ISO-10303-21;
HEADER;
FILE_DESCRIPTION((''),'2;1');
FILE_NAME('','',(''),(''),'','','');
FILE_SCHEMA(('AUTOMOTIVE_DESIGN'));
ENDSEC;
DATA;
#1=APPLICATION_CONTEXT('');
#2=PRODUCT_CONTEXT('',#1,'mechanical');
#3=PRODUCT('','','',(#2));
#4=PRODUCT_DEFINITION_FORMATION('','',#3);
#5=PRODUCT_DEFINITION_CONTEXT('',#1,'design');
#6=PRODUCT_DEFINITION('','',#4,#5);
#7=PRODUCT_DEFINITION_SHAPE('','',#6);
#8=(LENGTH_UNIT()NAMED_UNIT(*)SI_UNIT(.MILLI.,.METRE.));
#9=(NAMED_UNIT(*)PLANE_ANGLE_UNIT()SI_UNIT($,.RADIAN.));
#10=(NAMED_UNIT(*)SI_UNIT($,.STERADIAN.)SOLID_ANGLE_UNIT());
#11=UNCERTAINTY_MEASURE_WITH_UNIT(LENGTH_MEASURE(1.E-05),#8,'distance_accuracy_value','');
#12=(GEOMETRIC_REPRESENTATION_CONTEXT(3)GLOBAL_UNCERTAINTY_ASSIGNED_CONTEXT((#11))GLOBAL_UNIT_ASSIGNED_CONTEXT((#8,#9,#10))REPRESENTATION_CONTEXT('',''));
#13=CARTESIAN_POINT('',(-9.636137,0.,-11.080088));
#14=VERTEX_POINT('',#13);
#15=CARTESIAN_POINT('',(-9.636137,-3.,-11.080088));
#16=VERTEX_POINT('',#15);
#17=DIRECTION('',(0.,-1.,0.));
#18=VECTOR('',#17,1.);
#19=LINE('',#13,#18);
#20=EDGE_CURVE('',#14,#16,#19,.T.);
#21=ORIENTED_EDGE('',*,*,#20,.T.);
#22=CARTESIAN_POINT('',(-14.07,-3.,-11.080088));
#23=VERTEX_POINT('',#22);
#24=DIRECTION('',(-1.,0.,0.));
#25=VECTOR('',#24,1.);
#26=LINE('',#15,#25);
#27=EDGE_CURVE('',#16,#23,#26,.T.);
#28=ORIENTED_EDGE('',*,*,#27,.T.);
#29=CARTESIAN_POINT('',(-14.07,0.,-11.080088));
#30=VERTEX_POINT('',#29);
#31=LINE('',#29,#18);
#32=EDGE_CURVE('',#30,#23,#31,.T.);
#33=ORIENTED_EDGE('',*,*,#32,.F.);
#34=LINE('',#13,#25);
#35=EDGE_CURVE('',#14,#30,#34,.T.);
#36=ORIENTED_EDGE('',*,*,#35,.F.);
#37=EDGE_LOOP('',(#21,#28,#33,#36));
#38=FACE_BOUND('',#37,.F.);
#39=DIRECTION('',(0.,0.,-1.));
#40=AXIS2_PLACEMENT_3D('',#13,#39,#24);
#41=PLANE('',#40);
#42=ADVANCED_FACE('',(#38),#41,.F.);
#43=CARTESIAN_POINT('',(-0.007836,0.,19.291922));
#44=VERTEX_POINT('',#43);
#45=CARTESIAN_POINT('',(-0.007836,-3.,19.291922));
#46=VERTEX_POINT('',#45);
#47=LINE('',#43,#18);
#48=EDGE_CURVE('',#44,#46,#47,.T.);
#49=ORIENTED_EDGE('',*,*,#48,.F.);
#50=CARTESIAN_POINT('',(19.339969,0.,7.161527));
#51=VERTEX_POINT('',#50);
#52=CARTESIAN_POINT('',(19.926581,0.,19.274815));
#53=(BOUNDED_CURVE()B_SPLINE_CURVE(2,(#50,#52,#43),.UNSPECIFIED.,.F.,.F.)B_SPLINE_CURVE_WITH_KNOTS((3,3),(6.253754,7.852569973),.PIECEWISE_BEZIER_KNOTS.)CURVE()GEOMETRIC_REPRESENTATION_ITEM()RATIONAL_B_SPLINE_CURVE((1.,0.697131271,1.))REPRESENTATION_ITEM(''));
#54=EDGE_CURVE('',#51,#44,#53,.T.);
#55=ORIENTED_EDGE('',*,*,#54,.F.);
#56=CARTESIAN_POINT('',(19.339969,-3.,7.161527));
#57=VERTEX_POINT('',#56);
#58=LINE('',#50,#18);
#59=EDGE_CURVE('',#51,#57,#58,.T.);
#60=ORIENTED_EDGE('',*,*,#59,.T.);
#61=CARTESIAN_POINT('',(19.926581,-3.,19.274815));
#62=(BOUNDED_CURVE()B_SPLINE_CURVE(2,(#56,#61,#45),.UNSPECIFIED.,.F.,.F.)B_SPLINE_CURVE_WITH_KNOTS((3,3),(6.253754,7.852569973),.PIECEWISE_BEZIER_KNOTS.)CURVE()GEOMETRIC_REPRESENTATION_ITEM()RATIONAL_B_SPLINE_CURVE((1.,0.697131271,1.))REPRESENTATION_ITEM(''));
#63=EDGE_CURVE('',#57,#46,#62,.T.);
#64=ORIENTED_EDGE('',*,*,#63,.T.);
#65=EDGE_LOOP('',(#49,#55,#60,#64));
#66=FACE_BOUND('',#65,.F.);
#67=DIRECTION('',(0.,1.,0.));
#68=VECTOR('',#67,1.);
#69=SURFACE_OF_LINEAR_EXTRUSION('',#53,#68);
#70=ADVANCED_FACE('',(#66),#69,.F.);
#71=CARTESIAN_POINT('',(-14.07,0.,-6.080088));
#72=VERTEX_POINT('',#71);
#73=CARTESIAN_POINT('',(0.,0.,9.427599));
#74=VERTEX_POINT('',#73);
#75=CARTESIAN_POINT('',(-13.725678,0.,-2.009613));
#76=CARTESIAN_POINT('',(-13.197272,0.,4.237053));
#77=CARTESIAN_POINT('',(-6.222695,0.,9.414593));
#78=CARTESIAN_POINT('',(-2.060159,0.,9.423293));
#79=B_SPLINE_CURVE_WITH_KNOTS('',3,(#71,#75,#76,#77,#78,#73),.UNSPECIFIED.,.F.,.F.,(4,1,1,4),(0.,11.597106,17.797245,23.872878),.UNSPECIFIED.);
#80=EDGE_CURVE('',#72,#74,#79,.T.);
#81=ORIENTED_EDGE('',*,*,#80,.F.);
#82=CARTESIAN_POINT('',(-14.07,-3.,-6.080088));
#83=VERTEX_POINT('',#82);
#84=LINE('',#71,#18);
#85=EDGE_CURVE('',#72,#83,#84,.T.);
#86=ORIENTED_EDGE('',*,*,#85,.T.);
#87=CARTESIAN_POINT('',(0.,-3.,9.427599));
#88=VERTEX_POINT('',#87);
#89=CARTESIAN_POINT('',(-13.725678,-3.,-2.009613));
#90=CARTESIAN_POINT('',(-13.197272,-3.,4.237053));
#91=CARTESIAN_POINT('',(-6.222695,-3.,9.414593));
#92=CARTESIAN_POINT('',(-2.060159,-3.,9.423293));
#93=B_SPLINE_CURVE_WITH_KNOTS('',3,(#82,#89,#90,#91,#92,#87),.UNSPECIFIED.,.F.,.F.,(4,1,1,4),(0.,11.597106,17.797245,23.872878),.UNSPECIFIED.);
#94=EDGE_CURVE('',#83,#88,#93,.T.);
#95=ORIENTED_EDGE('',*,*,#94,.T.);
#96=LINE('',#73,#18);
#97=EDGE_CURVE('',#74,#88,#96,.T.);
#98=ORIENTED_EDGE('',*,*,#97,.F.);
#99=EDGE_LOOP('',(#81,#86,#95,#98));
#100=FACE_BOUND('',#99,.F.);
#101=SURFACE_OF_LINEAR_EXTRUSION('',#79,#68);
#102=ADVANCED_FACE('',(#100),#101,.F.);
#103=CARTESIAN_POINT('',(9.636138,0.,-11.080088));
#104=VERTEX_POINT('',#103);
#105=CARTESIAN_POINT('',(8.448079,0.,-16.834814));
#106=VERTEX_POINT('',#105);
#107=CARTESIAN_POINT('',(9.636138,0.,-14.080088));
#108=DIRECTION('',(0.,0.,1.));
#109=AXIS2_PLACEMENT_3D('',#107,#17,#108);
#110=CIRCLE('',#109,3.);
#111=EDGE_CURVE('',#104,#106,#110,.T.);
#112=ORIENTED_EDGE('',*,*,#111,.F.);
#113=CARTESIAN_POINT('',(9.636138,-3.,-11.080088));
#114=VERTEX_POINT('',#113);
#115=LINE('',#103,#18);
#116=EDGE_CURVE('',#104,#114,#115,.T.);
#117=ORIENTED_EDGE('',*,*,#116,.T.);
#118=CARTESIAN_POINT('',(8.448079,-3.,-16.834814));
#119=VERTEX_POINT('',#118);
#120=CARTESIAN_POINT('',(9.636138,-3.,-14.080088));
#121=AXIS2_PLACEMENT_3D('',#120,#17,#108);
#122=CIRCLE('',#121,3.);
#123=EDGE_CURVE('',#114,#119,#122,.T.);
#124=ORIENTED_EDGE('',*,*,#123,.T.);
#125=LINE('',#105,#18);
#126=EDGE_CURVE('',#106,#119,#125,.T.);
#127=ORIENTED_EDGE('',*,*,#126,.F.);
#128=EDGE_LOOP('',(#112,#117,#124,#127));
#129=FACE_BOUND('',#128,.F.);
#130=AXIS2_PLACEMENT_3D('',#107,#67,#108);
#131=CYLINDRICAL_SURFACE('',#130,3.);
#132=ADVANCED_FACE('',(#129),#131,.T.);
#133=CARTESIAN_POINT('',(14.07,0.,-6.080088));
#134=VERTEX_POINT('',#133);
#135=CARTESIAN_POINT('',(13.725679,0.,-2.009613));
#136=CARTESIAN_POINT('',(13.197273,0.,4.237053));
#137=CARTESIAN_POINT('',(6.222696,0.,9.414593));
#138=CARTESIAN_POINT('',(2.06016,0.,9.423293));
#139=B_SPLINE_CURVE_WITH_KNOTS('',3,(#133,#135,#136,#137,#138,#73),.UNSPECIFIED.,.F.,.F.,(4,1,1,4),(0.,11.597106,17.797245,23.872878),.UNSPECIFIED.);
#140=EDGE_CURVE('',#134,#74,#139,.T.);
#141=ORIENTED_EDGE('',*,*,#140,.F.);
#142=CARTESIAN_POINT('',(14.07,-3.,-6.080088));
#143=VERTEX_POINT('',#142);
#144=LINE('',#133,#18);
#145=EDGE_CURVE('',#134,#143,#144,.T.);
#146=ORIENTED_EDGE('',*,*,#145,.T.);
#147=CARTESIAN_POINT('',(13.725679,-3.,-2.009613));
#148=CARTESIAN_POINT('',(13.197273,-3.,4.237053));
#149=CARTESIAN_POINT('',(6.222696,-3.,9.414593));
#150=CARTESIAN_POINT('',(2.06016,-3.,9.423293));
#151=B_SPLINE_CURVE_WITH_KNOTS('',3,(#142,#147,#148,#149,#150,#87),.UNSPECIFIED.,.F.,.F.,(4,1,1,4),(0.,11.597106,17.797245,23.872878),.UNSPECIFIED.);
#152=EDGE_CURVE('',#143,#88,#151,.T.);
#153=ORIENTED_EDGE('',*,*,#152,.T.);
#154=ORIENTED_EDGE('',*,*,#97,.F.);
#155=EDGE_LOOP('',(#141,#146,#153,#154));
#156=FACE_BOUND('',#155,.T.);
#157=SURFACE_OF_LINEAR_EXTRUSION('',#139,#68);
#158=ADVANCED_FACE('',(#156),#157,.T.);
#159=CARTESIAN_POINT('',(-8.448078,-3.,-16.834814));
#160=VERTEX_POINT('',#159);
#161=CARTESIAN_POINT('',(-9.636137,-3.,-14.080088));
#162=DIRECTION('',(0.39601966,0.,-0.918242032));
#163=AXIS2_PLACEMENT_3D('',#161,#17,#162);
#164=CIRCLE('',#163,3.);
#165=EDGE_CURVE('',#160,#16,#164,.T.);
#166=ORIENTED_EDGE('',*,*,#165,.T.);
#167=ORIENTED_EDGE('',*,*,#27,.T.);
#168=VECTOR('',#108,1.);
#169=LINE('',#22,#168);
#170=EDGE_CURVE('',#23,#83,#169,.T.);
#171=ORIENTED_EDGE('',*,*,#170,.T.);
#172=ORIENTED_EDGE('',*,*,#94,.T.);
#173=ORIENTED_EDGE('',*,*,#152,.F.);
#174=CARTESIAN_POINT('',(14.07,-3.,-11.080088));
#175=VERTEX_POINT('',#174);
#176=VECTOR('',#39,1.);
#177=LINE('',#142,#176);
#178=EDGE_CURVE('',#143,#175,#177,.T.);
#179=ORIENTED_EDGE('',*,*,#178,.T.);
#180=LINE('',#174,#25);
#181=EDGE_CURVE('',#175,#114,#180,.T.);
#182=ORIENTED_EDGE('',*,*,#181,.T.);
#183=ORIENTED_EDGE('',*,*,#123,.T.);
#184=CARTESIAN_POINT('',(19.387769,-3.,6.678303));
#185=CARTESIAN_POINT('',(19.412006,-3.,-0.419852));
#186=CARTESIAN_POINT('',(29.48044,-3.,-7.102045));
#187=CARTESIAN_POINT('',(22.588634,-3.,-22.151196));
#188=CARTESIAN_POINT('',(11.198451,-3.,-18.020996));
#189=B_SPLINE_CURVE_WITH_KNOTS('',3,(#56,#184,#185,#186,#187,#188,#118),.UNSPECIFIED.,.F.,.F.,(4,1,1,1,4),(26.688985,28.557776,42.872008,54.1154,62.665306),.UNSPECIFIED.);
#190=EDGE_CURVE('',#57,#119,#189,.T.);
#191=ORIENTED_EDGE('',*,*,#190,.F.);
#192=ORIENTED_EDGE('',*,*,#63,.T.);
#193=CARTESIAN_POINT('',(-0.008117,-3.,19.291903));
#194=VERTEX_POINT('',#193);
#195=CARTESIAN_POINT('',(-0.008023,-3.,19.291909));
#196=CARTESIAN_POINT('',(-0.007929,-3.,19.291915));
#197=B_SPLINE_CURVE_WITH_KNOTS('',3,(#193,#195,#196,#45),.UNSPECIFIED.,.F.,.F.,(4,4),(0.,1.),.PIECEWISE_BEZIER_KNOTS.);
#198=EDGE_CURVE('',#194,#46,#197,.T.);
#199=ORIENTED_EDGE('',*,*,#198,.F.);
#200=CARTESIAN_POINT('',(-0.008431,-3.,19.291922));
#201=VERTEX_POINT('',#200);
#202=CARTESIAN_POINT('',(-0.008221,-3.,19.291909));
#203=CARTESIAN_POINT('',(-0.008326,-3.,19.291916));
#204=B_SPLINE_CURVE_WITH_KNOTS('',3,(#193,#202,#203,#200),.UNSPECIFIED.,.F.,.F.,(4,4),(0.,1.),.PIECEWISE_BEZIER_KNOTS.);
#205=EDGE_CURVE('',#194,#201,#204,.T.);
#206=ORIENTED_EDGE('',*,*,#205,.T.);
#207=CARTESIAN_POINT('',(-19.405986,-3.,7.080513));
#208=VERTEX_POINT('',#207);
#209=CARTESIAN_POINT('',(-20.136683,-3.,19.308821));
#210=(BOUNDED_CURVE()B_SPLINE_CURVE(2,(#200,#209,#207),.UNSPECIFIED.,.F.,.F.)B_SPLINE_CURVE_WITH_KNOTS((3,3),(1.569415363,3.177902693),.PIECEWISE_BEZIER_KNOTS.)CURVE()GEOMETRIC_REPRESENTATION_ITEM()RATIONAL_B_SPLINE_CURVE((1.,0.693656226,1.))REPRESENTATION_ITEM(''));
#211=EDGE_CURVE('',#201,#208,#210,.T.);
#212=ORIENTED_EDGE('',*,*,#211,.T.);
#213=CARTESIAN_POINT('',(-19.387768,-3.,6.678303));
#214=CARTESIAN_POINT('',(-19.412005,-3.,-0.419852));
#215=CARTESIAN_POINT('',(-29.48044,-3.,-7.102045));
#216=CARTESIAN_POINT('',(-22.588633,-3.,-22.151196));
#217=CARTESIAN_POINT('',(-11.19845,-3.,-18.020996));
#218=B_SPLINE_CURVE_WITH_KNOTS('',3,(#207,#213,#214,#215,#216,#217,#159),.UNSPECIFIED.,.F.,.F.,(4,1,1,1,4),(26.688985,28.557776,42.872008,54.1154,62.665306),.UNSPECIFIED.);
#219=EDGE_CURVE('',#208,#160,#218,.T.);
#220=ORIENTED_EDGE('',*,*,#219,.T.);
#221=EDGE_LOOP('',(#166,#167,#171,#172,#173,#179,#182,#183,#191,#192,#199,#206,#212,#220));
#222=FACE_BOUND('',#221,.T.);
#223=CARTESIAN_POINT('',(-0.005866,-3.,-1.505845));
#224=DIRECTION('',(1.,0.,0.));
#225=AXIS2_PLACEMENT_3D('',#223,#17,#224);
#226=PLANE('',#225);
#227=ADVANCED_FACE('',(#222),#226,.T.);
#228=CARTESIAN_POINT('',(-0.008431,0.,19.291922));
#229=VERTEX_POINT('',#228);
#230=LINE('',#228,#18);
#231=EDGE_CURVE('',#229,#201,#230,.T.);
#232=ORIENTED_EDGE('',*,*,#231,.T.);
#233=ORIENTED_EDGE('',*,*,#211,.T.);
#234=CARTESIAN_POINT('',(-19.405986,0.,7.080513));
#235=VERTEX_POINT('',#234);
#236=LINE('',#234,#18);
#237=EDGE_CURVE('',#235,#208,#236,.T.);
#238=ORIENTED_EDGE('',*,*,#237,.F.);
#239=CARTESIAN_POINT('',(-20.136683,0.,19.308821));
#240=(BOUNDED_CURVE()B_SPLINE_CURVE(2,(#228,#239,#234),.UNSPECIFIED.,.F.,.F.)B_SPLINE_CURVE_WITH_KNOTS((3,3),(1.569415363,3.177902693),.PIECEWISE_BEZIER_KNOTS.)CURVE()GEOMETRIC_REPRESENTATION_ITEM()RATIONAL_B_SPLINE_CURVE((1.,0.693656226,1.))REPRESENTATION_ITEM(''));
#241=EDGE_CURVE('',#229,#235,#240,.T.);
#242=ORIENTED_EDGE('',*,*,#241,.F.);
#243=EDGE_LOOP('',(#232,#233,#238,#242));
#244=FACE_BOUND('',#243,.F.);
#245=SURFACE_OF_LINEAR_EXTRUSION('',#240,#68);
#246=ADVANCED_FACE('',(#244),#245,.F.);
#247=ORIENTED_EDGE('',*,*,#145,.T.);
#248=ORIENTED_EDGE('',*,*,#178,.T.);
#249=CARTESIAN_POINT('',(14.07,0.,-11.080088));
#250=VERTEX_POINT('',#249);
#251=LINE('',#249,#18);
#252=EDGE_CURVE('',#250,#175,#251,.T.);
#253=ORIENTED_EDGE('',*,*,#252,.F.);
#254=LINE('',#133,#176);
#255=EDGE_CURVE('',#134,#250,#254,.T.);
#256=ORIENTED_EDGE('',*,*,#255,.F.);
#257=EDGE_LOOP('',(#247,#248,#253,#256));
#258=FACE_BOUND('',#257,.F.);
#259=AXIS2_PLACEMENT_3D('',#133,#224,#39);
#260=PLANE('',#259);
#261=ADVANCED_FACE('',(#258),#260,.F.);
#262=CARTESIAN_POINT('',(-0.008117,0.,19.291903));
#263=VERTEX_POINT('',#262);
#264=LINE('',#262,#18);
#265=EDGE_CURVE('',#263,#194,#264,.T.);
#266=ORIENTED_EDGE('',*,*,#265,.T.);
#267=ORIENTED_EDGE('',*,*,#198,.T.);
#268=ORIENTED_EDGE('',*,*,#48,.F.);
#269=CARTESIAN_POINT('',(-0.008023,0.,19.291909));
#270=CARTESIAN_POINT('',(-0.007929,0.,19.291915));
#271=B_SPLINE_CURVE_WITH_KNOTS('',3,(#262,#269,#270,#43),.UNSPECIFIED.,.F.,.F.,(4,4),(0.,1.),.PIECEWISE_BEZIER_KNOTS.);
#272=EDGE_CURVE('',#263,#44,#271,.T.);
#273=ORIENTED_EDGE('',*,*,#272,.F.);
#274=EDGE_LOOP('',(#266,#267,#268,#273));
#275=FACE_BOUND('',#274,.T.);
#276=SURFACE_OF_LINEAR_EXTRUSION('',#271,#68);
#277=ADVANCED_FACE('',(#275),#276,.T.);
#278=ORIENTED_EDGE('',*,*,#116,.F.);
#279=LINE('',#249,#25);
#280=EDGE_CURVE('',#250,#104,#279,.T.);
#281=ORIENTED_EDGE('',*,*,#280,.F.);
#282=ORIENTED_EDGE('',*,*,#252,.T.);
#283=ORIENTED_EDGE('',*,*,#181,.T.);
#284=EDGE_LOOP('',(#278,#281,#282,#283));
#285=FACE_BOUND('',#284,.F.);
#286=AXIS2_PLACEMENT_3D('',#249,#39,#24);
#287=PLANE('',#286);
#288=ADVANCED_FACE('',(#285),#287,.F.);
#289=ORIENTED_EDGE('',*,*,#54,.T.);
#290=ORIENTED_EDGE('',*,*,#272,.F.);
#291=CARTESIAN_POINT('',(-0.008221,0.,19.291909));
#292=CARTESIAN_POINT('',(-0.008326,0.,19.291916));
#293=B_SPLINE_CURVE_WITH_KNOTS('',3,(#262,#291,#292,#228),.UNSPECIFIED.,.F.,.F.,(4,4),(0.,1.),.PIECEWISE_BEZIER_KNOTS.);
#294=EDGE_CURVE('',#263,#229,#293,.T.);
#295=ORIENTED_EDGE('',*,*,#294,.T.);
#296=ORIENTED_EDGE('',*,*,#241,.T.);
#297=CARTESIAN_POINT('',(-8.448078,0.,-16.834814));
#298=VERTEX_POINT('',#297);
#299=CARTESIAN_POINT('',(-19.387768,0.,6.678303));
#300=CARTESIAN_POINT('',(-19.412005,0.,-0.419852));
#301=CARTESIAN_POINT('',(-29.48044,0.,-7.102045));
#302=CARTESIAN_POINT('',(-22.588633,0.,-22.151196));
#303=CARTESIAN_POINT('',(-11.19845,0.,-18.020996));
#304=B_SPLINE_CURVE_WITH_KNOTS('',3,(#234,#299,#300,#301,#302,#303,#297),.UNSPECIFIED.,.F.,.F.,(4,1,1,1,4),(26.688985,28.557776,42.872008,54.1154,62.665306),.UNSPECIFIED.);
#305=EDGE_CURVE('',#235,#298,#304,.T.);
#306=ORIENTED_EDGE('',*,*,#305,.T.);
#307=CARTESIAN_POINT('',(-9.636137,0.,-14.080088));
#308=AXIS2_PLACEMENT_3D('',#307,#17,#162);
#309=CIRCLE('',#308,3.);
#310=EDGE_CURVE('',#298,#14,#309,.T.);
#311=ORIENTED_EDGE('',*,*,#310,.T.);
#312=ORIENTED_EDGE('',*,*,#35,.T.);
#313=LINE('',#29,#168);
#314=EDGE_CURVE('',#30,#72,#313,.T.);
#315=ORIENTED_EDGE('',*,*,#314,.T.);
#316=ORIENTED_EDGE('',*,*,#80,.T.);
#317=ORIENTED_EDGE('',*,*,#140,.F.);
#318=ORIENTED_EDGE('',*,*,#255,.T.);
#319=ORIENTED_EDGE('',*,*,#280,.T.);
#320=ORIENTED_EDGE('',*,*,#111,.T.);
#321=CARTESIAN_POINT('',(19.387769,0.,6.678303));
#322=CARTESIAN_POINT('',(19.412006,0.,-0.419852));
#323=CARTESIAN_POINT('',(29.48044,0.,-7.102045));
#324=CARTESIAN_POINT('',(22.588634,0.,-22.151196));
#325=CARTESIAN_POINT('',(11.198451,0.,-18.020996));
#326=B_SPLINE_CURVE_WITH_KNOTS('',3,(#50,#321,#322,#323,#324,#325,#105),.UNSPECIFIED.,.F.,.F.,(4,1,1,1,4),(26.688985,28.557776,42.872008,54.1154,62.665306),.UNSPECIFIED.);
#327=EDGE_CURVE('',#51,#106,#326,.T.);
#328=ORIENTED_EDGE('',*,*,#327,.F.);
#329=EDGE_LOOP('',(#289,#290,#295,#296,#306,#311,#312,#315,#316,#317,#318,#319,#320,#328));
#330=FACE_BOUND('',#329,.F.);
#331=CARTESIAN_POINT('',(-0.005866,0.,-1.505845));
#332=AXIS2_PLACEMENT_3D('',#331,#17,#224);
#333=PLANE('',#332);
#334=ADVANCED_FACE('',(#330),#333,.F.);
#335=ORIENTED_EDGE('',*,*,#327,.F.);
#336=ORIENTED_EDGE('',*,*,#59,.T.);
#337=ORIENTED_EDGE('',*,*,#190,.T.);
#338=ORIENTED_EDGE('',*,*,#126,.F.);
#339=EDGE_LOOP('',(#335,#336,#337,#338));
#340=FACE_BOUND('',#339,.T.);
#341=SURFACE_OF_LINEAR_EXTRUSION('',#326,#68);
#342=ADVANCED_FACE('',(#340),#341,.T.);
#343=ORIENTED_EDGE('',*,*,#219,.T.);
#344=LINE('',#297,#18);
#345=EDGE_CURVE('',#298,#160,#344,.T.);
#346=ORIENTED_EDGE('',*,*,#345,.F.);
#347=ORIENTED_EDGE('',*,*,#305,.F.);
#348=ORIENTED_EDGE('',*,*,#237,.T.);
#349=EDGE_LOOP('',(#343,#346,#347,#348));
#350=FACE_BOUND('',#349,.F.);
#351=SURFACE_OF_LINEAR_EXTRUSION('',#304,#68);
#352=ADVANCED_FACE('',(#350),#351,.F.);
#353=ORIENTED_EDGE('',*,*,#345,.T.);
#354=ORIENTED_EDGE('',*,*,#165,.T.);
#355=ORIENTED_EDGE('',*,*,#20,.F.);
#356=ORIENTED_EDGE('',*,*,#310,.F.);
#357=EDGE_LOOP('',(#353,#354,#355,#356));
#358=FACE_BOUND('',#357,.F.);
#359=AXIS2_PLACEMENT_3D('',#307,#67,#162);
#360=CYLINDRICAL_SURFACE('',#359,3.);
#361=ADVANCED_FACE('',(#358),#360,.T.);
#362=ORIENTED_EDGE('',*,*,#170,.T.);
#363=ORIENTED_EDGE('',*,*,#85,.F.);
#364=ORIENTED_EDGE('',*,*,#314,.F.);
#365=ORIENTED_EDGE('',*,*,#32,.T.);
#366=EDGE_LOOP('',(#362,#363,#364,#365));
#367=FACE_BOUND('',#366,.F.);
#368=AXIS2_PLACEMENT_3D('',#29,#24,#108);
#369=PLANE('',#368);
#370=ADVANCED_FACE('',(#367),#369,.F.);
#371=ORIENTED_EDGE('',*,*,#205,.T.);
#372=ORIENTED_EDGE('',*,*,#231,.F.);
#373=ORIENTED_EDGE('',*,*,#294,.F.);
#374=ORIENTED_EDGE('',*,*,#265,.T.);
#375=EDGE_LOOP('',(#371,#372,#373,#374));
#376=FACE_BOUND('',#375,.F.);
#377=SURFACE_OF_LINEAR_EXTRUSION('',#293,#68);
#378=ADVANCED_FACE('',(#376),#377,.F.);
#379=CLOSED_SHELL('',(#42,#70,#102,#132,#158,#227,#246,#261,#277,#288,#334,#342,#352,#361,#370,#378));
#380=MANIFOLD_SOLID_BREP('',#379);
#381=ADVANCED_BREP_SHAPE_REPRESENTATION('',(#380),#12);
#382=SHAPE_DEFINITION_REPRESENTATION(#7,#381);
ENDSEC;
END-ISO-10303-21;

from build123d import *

# Parameters (mm, degrees)
F1_DEPTH = 3


# Not quite as in the source:
# - ends of sketch curves that miss each other by under 0.0002 mm in the source are joined
# - the dataset's text gives a spline's control points without its knots; the knots are read off the source's solid


with BuildPart() as f1:
    # F0 (on Front) → F1 (new body)
    with BuildSketch(Plane.XZ):
        with BuildLine():
            Line((-9.636137, -11.080088), (-14.07, -11.080088))
            Line((-14.07, -11.080088), (-14.07, -6.080088))
            add(Edge.make_bspline(
                [(-14.07, -6.080088), (-13.725678, -2.009613), (-13.197272, 4.237053), (-6.222695, 9.414593), (-2.060159, 9.423293), (0, 9.427599)],
                knots=[0, 0, 0, 0, 11.597106, 17.797245, 23.872878, 23.872878, 23.872878, 23.872878], degree=3))
            add(Edge.make_bspline(
                [(14.07, -6.080088), (13.725679, -2.009613), (13.197273, 4.237053), (6.222696, 9.414593), (2.06016, 9.423293), (0, 9.427599)],
                knots=[0, 0, 0, 0, 11.597106, 17.797245, 23.872878, 23.872878, 23.872878, 23.872878], degree=3))
            Line((14.07, -6.080088), (14.07, -11.080088))
            Line((14.07, -11.080088), (9.636138, -11.080088))
            ThreePointArc((9.636138, -11.080088), (6.6980962866, -13.4735314153), (8.4480789685, -16.8348140731))
            add(Edge.make_bspline(
                [(19.339969, 7.161527), (19.387769, 6.678303), (19.412006, -0.419852), (29.48044, -7.102045), (22.588634, -22.151196), (11.198451, -18.020996), (8.4480789685, -16.8348140731)],
                knots=[26.688985, 26.688985, 26.688985, 26.688985, 28.557776, 42.872008, 54.1154, 62.665306, 62.665306, 62.665306, 62.665306], degree=3))
            add(Edge.make_bspline(
                [(19.339969, 7.161527), (19.9265814181, 19.2748150047), (-0.0078359998, 19.2919222589)],
                knots=[6.253754, 6.253754, 6.253754, 7.8525699735, 7.8525699735, 7.8525699735], degree=2, weights=[1, 0.6971312715, 1]))
            add(Edge.make_bspline(
                [(-0.008117, 19.291903), (-0.008023, 19.291909), (-0.007929, 19.291915), (-0.0078359998, 19.2919222589)],
                knots=[0, 0, 0, 0, 1, 1, 1, 1], degree=3))
            add(Edge.make_bspline(
                [(-0.008117, 19.291903), (-0.008221, 19.291909), (-0.008326, 19.291916), (-0.008431, 19.291922)],
                knots=[0, 0, 0, 0, 1, 1, 1, 1], degree=3))
            add(Edge.make_bspline(
                [(-0.008431, 19.291922), (-20.136683318, 19.3088207532), (-19.4059855754, 7.0805132175)],
                knots=[1.5694153625, 1.5694153625, 1.5694153625, 3.1779026928, 3.1779026928, 3.1779026928], degree=2, weights=[1, 0.693656226, 1]))
            add(Edge.make_bspline(
                [(-19.4059855754, 7.0805132175), (-19.387768, 6.678303), (-19.412005, -0.419852), (-29.48044, -7.102045), (-22.588633, -22.151196), (-11.19845, -18.020996), (-8.448078, -16.834814)],
                knots=[26.688985, 26.688985, 26.688985, 26.688985, 28.557776, 42.872008, 54.1154, 62.665306, 62.665306, 62.665306, 62.665306], degree=3))
            ThreePointArc((-8.448078, -16.834814), (-6.6980952866, -13.4735314153), (-9.636137, -11.080088))
        make_face()
    extrude(amount=F1_DEPTH)


solid = f1.part
